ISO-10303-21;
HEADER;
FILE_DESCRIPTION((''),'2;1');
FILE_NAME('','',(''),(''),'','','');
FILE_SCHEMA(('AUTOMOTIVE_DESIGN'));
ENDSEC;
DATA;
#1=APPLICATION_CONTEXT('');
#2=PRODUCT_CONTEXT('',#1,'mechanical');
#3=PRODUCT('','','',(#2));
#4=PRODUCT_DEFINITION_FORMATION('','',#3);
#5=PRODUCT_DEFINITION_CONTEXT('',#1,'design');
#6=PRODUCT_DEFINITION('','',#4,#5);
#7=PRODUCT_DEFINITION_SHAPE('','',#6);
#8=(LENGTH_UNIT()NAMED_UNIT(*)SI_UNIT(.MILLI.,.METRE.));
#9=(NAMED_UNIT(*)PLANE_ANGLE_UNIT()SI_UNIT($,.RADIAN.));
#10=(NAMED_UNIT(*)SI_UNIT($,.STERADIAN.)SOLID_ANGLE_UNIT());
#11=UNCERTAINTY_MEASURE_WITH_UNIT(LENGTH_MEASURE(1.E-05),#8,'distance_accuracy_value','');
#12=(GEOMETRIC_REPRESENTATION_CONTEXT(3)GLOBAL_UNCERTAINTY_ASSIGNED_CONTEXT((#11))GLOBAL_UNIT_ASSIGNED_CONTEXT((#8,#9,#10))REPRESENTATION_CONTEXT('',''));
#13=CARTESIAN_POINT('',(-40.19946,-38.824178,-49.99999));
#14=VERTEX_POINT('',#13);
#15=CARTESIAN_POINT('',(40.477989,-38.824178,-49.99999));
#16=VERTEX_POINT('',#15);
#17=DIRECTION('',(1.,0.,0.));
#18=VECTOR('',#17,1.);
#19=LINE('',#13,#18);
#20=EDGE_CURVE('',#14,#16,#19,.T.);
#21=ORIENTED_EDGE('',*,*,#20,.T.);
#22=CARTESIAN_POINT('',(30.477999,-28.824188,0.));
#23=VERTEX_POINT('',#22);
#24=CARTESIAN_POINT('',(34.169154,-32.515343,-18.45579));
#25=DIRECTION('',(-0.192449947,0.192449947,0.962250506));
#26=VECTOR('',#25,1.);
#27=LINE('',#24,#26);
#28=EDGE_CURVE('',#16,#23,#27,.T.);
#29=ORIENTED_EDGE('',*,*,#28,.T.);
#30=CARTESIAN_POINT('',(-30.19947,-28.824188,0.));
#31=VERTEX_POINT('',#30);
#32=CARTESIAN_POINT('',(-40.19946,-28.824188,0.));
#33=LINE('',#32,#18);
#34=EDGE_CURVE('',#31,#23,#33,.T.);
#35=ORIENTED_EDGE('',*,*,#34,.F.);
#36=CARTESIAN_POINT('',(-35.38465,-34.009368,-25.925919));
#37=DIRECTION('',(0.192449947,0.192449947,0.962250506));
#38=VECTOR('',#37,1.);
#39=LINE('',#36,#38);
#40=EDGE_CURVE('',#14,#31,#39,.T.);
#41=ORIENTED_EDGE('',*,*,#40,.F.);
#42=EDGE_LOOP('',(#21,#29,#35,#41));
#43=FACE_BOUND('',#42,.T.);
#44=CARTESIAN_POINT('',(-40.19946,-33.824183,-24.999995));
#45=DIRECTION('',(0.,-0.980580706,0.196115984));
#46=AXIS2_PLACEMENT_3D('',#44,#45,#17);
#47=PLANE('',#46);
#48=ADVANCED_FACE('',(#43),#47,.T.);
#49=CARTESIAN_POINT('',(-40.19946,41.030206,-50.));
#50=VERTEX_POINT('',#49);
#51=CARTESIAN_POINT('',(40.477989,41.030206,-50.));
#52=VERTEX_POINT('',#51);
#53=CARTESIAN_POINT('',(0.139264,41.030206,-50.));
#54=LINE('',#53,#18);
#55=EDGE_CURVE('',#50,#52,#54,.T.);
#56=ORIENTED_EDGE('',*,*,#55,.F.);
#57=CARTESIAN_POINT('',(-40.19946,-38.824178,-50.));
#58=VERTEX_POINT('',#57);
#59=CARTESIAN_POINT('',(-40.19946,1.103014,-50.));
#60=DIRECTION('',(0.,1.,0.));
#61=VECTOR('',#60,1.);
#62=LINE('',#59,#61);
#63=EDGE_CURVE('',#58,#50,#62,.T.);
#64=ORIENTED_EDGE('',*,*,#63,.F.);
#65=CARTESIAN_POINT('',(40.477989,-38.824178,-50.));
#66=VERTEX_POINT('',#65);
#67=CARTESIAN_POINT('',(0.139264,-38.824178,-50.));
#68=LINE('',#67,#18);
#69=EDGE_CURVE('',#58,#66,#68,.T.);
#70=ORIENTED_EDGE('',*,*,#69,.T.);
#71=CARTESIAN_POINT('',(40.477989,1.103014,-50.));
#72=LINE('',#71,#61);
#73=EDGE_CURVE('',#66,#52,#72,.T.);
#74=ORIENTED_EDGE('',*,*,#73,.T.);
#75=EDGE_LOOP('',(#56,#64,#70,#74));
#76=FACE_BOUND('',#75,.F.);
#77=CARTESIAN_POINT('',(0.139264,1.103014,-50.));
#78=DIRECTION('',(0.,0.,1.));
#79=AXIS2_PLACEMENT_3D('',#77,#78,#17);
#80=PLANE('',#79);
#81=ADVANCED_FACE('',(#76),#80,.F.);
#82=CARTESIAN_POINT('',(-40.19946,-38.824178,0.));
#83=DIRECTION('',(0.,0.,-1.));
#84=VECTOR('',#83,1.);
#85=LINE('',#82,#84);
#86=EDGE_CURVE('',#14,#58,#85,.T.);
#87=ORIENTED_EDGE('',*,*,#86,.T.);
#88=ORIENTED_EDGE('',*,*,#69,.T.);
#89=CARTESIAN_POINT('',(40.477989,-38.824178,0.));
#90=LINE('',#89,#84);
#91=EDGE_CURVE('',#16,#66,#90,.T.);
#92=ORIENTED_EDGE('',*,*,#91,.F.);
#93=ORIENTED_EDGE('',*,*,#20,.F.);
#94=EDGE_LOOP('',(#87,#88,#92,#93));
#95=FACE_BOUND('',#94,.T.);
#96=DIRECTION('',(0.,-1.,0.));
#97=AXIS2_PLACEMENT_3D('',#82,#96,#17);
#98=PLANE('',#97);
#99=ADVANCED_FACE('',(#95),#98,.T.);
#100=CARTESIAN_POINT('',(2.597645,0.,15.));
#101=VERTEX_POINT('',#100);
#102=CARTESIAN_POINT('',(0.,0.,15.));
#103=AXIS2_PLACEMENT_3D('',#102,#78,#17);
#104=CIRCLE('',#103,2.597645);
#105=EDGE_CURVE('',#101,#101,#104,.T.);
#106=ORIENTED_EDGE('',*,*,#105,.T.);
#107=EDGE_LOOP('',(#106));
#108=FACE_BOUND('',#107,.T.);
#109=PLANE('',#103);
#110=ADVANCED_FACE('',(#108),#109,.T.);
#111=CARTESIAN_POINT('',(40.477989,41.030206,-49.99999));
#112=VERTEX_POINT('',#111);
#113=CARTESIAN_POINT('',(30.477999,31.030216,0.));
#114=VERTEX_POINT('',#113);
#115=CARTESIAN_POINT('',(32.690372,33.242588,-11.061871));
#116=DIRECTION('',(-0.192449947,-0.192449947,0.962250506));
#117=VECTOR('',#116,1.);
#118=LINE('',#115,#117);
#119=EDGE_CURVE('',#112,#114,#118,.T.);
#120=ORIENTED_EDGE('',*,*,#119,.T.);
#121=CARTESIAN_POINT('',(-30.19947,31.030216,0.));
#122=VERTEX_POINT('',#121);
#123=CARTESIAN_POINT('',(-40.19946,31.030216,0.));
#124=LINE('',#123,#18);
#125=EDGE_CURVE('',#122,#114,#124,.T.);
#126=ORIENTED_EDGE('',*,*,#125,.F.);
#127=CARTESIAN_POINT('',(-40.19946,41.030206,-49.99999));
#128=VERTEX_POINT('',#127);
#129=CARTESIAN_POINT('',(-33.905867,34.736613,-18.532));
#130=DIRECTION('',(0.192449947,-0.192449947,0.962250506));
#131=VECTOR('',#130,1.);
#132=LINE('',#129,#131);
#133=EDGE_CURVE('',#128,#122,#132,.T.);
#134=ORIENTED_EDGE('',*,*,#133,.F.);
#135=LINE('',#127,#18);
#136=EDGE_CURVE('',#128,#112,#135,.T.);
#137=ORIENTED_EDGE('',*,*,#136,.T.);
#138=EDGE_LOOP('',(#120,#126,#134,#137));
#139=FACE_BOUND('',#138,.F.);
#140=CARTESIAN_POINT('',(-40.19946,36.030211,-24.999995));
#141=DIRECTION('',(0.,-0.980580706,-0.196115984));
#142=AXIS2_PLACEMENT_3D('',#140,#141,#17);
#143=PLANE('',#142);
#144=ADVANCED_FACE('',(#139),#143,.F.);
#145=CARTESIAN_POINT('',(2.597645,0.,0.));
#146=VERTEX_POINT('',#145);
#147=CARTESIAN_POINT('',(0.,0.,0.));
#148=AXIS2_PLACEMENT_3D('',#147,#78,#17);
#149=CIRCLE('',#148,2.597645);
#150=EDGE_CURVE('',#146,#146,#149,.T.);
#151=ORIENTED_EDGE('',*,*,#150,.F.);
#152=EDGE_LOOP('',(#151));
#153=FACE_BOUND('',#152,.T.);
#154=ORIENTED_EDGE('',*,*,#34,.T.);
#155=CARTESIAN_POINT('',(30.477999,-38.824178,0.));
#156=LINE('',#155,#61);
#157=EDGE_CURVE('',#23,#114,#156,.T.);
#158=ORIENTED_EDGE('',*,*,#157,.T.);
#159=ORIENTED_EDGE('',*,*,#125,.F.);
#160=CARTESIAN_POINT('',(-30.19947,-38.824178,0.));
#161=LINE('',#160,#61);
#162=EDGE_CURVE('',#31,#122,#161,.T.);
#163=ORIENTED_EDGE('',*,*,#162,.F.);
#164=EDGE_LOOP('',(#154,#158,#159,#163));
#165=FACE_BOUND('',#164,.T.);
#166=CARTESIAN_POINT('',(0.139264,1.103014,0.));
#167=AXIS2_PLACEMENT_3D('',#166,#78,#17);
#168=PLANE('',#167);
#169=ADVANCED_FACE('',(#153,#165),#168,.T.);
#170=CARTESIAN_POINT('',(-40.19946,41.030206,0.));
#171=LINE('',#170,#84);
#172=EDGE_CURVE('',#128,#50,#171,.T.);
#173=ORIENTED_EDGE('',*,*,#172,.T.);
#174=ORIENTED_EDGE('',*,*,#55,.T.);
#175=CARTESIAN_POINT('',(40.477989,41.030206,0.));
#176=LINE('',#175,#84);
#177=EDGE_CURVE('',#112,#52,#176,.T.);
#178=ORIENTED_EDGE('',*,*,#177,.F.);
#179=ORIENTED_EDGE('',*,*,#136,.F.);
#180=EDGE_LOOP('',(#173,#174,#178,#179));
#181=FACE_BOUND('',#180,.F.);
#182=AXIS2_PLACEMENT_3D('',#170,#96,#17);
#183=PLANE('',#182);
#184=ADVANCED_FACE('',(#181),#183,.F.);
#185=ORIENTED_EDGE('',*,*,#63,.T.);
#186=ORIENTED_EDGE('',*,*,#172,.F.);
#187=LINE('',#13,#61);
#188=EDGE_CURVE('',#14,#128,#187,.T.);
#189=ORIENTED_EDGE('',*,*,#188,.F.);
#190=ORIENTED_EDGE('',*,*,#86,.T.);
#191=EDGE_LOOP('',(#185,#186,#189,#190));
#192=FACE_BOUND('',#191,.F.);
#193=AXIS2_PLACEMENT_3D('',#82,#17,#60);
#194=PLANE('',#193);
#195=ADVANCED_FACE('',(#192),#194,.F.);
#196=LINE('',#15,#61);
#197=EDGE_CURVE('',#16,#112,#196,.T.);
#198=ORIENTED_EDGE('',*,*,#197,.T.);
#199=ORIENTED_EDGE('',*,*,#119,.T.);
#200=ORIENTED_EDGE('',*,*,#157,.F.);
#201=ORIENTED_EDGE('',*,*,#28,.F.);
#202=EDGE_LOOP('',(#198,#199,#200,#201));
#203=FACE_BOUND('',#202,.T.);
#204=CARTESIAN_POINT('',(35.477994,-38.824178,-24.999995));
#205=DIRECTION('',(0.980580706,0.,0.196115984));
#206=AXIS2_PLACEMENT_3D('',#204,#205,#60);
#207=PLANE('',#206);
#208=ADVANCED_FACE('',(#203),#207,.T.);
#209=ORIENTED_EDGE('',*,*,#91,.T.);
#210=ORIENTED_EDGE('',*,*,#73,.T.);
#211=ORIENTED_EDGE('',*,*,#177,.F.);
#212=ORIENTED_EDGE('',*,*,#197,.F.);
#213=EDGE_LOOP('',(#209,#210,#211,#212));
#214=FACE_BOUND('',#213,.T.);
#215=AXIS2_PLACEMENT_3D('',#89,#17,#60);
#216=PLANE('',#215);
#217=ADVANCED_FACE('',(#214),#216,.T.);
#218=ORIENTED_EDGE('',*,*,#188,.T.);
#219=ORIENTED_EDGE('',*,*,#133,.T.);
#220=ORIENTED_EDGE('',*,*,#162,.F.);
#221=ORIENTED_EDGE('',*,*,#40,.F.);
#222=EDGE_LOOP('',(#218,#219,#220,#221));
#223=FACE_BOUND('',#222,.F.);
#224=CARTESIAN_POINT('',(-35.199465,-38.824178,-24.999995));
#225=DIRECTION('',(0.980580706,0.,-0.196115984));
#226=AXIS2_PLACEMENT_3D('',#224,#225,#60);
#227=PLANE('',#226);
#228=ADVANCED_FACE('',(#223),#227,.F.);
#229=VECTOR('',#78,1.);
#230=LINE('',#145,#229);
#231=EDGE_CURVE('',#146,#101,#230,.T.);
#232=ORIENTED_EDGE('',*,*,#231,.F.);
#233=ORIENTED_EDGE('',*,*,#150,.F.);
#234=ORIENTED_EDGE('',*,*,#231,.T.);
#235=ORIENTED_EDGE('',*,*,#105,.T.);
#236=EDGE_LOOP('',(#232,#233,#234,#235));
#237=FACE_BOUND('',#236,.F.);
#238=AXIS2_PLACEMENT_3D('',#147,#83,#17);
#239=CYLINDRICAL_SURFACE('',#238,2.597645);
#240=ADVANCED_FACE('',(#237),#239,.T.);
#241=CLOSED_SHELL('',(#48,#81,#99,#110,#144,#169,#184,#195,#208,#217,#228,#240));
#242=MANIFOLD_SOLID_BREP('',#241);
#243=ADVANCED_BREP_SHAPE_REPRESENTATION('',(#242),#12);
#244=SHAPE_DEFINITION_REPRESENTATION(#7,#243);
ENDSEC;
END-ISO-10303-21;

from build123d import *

# Parameters (mm, degrees)
F0_W     = 80.6774497032
F0_H     = 79.8543840647
F1_DEPTH = 50
F2_SIZE2 = 9.99999
F2_SIZE  = 49.99999
F3_R     = 2.5976453029
F4_DEPTH = 15


# Not quite as in the source:
# - a fillet or chamfer is up to 0.001 mm smaller than in the source, because OpenCascade refuses the exact size


with BuildPart() as f1:
    # F0 (on Top) → F1 (new body)
    with BuildSketch(Plane.XY):
        with Locations((0.1392643899, 1.1030137539)):
            Rectangle(F0_W, F0_H)
    extrude(amount=-F1_DEPTH)

    # F2 (size 50 and 10 in the source; OpenCascade refuses exactly that, so slightly less here)
    f2_edges = [f1.edges().sort_by_distance(p)[0] for p in [
        (0.139264, 41.030206, 0),
        (-40.19946, 1.103014, 0),
        (0.139264, -38.824178, 0),
        (40.477989, 1.103014, 0),
    ]]
    chamfer(f2_edges, length=F2_SIZE, length2=F2_SIZE2)

    # F3 (on Top) → F4 (join)
    with BuildSketch(Plane.XY):
        Circle(F3_R)
    extrude(amount=F4_DEPTH)


solid = f1.part
